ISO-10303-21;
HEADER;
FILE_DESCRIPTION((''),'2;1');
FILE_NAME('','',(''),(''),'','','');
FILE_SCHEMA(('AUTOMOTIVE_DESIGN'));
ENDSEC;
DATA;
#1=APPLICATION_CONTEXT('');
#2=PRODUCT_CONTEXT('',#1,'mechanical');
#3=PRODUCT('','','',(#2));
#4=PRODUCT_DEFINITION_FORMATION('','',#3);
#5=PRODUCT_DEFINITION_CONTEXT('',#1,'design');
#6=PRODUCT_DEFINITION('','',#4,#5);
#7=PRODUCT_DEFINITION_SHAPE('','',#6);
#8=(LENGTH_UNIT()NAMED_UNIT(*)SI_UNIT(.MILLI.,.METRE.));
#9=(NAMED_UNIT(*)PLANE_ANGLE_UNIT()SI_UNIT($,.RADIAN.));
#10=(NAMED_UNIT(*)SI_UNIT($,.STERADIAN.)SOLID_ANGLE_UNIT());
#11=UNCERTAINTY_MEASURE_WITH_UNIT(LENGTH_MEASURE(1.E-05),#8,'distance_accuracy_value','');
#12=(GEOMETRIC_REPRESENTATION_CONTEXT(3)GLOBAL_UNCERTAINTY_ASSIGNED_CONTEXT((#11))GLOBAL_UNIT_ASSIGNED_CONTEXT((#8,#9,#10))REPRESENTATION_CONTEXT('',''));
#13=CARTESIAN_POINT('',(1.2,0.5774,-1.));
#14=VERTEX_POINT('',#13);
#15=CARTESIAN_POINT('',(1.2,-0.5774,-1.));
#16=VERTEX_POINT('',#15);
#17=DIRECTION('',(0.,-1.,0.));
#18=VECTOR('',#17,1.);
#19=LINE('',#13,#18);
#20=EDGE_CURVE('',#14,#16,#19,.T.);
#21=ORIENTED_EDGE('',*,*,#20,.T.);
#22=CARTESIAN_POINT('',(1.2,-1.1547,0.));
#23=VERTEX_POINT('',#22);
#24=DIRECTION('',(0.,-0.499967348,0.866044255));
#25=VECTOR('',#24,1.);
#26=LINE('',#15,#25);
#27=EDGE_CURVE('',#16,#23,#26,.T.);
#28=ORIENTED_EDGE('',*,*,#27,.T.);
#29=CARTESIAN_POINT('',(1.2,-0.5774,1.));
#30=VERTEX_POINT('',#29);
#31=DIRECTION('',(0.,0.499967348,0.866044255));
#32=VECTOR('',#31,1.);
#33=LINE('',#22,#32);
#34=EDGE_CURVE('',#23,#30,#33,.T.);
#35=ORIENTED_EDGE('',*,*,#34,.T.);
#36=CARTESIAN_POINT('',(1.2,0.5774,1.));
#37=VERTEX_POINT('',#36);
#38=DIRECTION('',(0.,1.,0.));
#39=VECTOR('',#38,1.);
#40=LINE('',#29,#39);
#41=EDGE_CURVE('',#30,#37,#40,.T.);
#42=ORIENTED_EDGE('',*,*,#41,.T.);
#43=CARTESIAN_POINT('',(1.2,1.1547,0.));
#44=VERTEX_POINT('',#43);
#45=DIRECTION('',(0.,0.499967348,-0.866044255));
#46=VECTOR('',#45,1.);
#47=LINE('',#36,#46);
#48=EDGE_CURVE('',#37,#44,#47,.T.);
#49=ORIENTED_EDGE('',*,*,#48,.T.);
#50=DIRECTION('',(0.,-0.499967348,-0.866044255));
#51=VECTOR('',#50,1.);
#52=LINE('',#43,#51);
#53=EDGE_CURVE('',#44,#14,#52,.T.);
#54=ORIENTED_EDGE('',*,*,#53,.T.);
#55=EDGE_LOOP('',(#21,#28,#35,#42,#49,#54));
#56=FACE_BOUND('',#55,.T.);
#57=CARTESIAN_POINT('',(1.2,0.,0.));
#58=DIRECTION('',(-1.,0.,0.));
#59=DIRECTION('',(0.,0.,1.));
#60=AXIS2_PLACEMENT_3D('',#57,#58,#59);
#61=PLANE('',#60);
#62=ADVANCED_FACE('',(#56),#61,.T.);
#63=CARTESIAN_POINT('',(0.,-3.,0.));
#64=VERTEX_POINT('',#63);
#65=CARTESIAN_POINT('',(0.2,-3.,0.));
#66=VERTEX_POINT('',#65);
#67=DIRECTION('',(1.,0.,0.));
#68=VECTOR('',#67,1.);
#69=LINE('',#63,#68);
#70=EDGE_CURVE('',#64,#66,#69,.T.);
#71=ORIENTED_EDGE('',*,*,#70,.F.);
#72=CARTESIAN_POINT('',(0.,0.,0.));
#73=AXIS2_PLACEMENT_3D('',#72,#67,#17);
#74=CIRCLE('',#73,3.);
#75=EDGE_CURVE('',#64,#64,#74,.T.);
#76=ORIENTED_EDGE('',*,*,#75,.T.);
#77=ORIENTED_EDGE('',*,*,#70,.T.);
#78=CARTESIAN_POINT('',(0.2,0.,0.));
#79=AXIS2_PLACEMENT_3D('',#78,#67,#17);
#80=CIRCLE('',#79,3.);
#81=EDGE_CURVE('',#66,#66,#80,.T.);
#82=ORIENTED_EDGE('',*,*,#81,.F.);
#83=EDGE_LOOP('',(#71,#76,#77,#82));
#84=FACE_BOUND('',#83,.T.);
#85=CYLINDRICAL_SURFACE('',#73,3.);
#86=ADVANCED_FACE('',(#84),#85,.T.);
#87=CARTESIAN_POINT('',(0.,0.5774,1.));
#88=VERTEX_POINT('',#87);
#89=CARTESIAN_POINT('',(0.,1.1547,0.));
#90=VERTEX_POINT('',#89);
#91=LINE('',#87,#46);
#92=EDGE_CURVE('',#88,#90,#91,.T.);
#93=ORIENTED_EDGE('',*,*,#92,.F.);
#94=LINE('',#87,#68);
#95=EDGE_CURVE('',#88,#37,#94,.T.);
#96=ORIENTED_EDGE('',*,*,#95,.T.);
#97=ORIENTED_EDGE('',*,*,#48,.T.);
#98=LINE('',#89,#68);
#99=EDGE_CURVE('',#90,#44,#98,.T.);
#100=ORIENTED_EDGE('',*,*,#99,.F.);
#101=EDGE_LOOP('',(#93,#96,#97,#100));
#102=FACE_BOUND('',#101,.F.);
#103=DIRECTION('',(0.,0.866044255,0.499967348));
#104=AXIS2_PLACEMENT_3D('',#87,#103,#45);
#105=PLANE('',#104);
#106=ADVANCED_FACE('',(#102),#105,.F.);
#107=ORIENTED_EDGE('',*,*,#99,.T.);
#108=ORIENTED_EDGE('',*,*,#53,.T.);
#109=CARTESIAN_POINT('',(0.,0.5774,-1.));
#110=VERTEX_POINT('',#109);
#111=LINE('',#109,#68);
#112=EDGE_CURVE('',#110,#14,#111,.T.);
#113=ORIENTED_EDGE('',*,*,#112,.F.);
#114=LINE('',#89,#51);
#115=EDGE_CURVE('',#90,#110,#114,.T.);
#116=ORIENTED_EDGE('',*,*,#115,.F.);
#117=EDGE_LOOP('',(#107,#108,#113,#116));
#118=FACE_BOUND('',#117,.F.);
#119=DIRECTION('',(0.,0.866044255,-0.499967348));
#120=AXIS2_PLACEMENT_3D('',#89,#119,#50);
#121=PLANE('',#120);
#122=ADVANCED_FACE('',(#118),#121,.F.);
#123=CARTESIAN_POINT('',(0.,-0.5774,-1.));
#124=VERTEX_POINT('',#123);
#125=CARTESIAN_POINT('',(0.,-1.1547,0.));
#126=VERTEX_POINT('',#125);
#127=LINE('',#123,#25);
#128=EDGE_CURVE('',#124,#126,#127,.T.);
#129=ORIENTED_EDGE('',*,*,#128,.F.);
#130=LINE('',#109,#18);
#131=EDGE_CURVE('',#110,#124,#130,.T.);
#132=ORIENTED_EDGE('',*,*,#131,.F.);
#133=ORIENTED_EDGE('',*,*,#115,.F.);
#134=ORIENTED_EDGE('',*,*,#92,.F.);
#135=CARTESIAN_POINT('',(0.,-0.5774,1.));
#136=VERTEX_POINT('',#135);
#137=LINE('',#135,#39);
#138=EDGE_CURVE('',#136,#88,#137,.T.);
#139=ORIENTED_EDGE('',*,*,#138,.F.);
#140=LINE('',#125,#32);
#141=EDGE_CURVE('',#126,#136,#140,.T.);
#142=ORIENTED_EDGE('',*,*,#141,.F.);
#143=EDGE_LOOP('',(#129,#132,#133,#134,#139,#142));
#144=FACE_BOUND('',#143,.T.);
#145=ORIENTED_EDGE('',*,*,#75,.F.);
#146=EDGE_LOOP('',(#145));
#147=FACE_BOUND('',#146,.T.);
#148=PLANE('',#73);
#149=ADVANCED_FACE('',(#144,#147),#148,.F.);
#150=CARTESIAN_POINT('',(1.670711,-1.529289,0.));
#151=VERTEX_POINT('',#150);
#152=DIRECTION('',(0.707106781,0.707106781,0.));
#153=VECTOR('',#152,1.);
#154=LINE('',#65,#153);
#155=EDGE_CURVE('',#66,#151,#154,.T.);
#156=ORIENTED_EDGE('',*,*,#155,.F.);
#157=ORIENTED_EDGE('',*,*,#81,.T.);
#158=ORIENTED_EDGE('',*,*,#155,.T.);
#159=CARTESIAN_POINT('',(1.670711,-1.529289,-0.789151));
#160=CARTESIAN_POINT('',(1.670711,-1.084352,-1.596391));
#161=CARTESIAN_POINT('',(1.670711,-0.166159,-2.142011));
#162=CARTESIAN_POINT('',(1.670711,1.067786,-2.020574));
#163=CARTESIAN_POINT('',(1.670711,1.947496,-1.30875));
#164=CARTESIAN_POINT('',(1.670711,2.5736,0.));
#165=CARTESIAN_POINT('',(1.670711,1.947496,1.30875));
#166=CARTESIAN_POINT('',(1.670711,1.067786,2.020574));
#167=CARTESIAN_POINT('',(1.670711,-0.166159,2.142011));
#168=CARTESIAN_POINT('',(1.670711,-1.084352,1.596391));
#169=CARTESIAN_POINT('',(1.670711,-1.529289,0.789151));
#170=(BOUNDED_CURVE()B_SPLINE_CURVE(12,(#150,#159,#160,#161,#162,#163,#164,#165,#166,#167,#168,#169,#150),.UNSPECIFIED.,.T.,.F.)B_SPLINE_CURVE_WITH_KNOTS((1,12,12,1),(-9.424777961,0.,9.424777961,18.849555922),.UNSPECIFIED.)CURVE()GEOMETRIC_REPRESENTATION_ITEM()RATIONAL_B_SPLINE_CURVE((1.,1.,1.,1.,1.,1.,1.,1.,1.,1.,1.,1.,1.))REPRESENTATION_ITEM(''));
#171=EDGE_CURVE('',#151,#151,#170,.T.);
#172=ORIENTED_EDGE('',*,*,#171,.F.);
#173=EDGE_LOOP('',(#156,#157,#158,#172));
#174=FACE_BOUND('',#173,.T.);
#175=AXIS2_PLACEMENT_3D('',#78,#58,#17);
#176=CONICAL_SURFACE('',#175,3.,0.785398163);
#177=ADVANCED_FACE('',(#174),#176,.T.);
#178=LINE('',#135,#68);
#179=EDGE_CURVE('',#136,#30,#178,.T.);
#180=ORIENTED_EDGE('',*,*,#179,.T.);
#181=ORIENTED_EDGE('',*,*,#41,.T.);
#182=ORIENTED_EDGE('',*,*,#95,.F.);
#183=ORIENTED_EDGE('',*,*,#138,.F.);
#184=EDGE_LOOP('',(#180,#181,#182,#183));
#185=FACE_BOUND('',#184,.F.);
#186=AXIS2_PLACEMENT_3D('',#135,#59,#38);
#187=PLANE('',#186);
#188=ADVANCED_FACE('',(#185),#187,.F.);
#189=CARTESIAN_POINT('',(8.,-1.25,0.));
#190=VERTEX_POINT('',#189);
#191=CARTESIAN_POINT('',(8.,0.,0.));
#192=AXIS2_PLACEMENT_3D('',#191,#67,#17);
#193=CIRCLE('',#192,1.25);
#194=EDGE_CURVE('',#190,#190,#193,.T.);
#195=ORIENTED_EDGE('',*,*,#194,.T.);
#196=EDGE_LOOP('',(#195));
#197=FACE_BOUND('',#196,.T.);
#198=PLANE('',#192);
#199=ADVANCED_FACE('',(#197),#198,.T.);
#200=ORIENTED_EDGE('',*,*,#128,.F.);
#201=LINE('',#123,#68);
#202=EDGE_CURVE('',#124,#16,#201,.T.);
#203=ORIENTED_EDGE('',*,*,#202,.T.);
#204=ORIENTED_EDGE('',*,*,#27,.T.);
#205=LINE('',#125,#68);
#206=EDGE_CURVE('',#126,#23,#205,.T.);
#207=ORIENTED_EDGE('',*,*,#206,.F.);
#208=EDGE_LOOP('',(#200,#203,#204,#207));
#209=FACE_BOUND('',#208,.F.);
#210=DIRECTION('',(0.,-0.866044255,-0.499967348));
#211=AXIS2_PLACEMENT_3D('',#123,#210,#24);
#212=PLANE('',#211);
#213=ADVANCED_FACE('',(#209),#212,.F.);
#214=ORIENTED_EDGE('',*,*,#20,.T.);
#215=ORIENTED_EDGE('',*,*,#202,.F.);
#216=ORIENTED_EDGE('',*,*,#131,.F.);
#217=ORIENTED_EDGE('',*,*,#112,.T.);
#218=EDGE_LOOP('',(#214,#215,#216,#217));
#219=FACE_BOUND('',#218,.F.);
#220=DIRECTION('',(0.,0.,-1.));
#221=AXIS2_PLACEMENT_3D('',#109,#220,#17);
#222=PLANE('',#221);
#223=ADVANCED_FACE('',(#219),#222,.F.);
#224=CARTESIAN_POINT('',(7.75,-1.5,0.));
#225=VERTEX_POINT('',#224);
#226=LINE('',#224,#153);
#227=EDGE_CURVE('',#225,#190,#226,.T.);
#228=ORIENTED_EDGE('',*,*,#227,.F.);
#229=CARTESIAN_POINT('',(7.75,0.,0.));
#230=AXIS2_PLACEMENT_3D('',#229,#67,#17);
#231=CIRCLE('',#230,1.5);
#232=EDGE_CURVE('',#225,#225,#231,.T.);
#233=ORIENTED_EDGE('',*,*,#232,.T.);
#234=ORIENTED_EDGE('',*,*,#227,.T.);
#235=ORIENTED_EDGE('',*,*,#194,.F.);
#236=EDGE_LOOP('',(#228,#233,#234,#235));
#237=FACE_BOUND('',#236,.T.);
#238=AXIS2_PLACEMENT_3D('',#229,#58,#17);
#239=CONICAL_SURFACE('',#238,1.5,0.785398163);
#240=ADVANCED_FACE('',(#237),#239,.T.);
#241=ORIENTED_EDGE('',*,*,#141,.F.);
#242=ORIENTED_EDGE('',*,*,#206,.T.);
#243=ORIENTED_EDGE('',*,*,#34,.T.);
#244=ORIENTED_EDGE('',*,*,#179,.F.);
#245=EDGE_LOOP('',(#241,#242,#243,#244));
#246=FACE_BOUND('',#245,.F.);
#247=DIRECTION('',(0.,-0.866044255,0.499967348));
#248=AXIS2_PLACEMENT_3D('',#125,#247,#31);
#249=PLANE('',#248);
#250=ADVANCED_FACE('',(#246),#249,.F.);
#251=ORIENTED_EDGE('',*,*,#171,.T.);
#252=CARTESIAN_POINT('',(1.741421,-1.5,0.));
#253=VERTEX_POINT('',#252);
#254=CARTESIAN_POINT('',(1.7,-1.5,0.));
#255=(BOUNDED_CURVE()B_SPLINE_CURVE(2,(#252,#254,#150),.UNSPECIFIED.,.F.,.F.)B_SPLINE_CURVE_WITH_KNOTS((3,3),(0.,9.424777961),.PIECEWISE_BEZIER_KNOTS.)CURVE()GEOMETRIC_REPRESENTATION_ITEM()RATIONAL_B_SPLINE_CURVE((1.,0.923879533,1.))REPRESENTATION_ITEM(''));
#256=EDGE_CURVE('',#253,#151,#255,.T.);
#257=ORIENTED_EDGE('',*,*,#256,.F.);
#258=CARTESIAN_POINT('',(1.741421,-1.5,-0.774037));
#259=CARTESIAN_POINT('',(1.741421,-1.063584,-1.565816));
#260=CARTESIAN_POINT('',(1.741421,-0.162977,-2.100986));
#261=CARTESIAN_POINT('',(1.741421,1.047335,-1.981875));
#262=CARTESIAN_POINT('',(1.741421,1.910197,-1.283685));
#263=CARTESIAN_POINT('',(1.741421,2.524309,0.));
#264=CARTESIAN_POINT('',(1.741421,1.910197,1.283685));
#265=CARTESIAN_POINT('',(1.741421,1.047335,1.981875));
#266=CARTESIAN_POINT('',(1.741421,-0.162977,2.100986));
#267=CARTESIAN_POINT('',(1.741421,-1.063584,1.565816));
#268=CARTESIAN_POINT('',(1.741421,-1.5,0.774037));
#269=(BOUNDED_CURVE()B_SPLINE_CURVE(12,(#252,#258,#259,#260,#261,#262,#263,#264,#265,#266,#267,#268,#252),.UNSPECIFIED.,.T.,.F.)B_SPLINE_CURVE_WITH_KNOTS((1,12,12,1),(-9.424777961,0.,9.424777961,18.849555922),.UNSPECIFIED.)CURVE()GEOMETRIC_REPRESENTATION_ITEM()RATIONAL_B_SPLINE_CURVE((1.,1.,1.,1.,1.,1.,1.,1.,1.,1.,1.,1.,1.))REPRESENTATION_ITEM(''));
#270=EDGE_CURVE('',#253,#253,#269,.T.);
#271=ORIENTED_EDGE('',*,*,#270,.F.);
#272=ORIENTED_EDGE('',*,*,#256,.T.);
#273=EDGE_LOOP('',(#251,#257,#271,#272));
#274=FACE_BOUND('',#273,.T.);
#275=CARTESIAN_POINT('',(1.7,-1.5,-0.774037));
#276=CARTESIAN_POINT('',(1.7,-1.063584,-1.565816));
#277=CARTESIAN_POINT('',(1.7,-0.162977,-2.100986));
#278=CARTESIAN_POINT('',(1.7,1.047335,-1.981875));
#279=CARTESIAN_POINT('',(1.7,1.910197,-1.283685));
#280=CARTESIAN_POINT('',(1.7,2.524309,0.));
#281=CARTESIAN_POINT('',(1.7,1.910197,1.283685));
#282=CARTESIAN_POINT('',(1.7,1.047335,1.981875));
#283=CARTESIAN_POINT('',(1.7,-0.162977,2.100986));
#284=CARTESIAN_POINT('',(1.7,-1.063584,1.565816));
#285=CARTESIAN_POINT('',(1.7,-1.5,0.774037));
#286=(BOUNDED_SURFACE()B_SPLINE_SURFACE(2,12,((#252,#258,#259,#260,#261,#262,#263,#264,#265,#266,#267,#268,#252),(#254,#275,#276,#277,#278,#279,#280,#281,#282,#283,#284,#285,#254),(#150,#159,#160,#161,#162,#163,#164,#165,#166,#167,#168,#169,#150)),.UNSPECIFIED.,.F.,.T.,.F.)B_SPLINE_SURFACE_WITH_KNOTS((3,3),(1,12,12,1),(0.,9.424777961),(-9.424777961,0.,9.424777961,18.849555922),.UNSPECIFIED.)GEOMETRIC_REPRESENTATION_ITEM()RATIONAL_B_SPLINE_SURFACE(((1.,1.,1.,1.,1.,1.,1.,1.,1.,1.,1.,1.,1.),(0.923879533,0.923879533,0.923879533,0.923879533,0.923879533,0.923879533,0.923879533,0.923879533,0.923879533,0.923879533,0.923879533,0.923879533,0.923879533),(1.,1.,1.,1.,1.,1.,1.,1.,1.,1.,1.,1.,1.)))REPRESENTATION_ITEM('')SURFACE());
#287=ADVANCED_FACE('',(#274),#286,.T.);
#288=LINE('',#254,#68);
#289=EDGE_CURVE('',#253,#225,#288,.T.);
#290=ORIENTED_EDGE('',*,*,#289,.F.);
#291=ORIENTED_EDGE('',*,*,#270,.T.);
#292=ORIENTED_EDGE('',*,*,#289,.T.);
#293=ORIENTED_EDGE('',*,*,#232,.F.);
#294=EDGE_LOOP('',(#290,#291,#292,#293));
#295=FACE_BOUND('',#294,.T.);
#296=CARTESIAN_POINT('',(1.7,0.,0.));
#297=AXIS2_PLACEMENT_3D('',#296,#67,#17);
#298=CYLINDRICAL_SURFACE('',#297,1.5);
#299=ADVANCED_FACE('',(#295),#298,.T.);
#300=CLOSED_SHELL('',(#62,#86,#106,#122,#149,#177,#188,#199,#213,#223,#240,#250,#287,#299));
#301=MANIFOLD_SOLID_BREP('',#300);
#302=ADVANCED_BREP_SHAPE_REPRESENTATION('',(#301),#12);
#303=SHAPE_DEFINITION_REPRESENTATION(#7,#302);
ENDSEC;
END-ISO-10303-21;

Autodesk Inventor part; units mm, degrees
ref_plane "YZ Plane" through (0, 0, 0) normal (1, 0, 0) x (0, 1, 0)
sketch "Skizze1" plane through (0, 0, 0) normal (0, 1, 0) x (-1, 0, 0)
  point P0 (0, 0)
sketch "Skizze2" plane through (0, 0, 0) normal (0, 0, 1) x (-1, 0, 0)
  line L0 (-8, 1.5) -> (-8, 0)
  line L1 (-1.7, 1.5) -> (-8, 1.5)
  line L2 (-0.2, 3) -> (-1.7, 1.5)
  line L3 (0, 3) -> (-0.2, 3)
  line L4 (0, 0) -> (0, 3)
  line L5 (-8, 0) -> (0, 0)
  line L6 (-8, 0) -> (0, 0)
  line L7 (0, -9.6) -> (0, 1.6) projected
  line L8 (1.6, 0) -> (-9.6, 0) projected
  dimension "ParC" = 0.2
  dimension "d43" = 45
  dimension "d44" = 3
  dimension "d45" = 1.5
  dimension "d46" = 8
  dimension "d47" = 0
  dimension "d48" = 0
revolve "Drehung1" add sketch "Skizze2" angle 360 about axis through (8, 0, 0) along (1, 0, 0)
sketch "Skizze3" plane through (0, 0, 0) normal (-1, 0, 0) x (0, 0, 1)
  line L0 (-1, 0.5774) -> (-1, -0.5774)
  line L1 (0, 1.1547) -> (-1, 0.5774)
  line L2 (1, 0.5774) -> (0, 1.1547)
  line L3 (1, -0.5774) -> (1, 0.5774)
  line L4 (0, -1.1547) -> (1, -0.5774)
  line L5 (-1, -0.5774) -> (0, -1.1547)
  circle A0 centre (0, 0) radius 1 construction
  circle A1 centre (0, 0) radius 1.5 construction
  dimension "d11" = 2
  dimension "d13" = 120
  dimension "d15" = 120
extrude "Extrusion1" cut sketch "Skizze3" against normal blind 1.2
fillet "Rundung1" radius 0.1 1 edges at (1.7, 1.5, 0)
chamfer "Fase1" distance 0.25 angle 45 1 edges at (8, 1.5, 0) measured on face at (5.9138, -1.4041, 0.5277)
thread "Gewinde1" size "M3x0.5" class "6g" standard "ISO Metric profile" length 5.3
ref_plane "MSC_PF1" through (0, 0, 0) normal (1, 0, 0) x (0, 1, 0)
ref_plane "MSC_PT1" through (0, 0, 0) normal (1, 0, 0) x (0, 1, 0)
equation "\"d43\" = 0.5 * ang"
equation "\"d44\" = 0.5 * dk"
equation "\"d45\" = 0.5 * NND"
equation "\"d46\" = NLG"
equation "\"d11\" = ParS"
equation "\"d16\" = ParT"
equation "\"d18\" = r"
equation "\"d19\" = 0.5 * PTC"
equation "\"d39\" = 0.5 * PTC"
equation "\"NND\" = 3"
equation "\"PTC\" = 0.5"
equation "\"dk\" = 6"
equation "\"ParK\" = 1.7"
equation "\"ParS\" = 2"
equation "\"ParT\" = 1.2"
equation "\"r\" = 0.1"
equation "\"NLG\" = 8"
equation "\"ang\" = 90deg"
equation "\"THREADDIA\" = NND"
properties part number "ISO 10642 - M3 x  8" material "Stahl"
